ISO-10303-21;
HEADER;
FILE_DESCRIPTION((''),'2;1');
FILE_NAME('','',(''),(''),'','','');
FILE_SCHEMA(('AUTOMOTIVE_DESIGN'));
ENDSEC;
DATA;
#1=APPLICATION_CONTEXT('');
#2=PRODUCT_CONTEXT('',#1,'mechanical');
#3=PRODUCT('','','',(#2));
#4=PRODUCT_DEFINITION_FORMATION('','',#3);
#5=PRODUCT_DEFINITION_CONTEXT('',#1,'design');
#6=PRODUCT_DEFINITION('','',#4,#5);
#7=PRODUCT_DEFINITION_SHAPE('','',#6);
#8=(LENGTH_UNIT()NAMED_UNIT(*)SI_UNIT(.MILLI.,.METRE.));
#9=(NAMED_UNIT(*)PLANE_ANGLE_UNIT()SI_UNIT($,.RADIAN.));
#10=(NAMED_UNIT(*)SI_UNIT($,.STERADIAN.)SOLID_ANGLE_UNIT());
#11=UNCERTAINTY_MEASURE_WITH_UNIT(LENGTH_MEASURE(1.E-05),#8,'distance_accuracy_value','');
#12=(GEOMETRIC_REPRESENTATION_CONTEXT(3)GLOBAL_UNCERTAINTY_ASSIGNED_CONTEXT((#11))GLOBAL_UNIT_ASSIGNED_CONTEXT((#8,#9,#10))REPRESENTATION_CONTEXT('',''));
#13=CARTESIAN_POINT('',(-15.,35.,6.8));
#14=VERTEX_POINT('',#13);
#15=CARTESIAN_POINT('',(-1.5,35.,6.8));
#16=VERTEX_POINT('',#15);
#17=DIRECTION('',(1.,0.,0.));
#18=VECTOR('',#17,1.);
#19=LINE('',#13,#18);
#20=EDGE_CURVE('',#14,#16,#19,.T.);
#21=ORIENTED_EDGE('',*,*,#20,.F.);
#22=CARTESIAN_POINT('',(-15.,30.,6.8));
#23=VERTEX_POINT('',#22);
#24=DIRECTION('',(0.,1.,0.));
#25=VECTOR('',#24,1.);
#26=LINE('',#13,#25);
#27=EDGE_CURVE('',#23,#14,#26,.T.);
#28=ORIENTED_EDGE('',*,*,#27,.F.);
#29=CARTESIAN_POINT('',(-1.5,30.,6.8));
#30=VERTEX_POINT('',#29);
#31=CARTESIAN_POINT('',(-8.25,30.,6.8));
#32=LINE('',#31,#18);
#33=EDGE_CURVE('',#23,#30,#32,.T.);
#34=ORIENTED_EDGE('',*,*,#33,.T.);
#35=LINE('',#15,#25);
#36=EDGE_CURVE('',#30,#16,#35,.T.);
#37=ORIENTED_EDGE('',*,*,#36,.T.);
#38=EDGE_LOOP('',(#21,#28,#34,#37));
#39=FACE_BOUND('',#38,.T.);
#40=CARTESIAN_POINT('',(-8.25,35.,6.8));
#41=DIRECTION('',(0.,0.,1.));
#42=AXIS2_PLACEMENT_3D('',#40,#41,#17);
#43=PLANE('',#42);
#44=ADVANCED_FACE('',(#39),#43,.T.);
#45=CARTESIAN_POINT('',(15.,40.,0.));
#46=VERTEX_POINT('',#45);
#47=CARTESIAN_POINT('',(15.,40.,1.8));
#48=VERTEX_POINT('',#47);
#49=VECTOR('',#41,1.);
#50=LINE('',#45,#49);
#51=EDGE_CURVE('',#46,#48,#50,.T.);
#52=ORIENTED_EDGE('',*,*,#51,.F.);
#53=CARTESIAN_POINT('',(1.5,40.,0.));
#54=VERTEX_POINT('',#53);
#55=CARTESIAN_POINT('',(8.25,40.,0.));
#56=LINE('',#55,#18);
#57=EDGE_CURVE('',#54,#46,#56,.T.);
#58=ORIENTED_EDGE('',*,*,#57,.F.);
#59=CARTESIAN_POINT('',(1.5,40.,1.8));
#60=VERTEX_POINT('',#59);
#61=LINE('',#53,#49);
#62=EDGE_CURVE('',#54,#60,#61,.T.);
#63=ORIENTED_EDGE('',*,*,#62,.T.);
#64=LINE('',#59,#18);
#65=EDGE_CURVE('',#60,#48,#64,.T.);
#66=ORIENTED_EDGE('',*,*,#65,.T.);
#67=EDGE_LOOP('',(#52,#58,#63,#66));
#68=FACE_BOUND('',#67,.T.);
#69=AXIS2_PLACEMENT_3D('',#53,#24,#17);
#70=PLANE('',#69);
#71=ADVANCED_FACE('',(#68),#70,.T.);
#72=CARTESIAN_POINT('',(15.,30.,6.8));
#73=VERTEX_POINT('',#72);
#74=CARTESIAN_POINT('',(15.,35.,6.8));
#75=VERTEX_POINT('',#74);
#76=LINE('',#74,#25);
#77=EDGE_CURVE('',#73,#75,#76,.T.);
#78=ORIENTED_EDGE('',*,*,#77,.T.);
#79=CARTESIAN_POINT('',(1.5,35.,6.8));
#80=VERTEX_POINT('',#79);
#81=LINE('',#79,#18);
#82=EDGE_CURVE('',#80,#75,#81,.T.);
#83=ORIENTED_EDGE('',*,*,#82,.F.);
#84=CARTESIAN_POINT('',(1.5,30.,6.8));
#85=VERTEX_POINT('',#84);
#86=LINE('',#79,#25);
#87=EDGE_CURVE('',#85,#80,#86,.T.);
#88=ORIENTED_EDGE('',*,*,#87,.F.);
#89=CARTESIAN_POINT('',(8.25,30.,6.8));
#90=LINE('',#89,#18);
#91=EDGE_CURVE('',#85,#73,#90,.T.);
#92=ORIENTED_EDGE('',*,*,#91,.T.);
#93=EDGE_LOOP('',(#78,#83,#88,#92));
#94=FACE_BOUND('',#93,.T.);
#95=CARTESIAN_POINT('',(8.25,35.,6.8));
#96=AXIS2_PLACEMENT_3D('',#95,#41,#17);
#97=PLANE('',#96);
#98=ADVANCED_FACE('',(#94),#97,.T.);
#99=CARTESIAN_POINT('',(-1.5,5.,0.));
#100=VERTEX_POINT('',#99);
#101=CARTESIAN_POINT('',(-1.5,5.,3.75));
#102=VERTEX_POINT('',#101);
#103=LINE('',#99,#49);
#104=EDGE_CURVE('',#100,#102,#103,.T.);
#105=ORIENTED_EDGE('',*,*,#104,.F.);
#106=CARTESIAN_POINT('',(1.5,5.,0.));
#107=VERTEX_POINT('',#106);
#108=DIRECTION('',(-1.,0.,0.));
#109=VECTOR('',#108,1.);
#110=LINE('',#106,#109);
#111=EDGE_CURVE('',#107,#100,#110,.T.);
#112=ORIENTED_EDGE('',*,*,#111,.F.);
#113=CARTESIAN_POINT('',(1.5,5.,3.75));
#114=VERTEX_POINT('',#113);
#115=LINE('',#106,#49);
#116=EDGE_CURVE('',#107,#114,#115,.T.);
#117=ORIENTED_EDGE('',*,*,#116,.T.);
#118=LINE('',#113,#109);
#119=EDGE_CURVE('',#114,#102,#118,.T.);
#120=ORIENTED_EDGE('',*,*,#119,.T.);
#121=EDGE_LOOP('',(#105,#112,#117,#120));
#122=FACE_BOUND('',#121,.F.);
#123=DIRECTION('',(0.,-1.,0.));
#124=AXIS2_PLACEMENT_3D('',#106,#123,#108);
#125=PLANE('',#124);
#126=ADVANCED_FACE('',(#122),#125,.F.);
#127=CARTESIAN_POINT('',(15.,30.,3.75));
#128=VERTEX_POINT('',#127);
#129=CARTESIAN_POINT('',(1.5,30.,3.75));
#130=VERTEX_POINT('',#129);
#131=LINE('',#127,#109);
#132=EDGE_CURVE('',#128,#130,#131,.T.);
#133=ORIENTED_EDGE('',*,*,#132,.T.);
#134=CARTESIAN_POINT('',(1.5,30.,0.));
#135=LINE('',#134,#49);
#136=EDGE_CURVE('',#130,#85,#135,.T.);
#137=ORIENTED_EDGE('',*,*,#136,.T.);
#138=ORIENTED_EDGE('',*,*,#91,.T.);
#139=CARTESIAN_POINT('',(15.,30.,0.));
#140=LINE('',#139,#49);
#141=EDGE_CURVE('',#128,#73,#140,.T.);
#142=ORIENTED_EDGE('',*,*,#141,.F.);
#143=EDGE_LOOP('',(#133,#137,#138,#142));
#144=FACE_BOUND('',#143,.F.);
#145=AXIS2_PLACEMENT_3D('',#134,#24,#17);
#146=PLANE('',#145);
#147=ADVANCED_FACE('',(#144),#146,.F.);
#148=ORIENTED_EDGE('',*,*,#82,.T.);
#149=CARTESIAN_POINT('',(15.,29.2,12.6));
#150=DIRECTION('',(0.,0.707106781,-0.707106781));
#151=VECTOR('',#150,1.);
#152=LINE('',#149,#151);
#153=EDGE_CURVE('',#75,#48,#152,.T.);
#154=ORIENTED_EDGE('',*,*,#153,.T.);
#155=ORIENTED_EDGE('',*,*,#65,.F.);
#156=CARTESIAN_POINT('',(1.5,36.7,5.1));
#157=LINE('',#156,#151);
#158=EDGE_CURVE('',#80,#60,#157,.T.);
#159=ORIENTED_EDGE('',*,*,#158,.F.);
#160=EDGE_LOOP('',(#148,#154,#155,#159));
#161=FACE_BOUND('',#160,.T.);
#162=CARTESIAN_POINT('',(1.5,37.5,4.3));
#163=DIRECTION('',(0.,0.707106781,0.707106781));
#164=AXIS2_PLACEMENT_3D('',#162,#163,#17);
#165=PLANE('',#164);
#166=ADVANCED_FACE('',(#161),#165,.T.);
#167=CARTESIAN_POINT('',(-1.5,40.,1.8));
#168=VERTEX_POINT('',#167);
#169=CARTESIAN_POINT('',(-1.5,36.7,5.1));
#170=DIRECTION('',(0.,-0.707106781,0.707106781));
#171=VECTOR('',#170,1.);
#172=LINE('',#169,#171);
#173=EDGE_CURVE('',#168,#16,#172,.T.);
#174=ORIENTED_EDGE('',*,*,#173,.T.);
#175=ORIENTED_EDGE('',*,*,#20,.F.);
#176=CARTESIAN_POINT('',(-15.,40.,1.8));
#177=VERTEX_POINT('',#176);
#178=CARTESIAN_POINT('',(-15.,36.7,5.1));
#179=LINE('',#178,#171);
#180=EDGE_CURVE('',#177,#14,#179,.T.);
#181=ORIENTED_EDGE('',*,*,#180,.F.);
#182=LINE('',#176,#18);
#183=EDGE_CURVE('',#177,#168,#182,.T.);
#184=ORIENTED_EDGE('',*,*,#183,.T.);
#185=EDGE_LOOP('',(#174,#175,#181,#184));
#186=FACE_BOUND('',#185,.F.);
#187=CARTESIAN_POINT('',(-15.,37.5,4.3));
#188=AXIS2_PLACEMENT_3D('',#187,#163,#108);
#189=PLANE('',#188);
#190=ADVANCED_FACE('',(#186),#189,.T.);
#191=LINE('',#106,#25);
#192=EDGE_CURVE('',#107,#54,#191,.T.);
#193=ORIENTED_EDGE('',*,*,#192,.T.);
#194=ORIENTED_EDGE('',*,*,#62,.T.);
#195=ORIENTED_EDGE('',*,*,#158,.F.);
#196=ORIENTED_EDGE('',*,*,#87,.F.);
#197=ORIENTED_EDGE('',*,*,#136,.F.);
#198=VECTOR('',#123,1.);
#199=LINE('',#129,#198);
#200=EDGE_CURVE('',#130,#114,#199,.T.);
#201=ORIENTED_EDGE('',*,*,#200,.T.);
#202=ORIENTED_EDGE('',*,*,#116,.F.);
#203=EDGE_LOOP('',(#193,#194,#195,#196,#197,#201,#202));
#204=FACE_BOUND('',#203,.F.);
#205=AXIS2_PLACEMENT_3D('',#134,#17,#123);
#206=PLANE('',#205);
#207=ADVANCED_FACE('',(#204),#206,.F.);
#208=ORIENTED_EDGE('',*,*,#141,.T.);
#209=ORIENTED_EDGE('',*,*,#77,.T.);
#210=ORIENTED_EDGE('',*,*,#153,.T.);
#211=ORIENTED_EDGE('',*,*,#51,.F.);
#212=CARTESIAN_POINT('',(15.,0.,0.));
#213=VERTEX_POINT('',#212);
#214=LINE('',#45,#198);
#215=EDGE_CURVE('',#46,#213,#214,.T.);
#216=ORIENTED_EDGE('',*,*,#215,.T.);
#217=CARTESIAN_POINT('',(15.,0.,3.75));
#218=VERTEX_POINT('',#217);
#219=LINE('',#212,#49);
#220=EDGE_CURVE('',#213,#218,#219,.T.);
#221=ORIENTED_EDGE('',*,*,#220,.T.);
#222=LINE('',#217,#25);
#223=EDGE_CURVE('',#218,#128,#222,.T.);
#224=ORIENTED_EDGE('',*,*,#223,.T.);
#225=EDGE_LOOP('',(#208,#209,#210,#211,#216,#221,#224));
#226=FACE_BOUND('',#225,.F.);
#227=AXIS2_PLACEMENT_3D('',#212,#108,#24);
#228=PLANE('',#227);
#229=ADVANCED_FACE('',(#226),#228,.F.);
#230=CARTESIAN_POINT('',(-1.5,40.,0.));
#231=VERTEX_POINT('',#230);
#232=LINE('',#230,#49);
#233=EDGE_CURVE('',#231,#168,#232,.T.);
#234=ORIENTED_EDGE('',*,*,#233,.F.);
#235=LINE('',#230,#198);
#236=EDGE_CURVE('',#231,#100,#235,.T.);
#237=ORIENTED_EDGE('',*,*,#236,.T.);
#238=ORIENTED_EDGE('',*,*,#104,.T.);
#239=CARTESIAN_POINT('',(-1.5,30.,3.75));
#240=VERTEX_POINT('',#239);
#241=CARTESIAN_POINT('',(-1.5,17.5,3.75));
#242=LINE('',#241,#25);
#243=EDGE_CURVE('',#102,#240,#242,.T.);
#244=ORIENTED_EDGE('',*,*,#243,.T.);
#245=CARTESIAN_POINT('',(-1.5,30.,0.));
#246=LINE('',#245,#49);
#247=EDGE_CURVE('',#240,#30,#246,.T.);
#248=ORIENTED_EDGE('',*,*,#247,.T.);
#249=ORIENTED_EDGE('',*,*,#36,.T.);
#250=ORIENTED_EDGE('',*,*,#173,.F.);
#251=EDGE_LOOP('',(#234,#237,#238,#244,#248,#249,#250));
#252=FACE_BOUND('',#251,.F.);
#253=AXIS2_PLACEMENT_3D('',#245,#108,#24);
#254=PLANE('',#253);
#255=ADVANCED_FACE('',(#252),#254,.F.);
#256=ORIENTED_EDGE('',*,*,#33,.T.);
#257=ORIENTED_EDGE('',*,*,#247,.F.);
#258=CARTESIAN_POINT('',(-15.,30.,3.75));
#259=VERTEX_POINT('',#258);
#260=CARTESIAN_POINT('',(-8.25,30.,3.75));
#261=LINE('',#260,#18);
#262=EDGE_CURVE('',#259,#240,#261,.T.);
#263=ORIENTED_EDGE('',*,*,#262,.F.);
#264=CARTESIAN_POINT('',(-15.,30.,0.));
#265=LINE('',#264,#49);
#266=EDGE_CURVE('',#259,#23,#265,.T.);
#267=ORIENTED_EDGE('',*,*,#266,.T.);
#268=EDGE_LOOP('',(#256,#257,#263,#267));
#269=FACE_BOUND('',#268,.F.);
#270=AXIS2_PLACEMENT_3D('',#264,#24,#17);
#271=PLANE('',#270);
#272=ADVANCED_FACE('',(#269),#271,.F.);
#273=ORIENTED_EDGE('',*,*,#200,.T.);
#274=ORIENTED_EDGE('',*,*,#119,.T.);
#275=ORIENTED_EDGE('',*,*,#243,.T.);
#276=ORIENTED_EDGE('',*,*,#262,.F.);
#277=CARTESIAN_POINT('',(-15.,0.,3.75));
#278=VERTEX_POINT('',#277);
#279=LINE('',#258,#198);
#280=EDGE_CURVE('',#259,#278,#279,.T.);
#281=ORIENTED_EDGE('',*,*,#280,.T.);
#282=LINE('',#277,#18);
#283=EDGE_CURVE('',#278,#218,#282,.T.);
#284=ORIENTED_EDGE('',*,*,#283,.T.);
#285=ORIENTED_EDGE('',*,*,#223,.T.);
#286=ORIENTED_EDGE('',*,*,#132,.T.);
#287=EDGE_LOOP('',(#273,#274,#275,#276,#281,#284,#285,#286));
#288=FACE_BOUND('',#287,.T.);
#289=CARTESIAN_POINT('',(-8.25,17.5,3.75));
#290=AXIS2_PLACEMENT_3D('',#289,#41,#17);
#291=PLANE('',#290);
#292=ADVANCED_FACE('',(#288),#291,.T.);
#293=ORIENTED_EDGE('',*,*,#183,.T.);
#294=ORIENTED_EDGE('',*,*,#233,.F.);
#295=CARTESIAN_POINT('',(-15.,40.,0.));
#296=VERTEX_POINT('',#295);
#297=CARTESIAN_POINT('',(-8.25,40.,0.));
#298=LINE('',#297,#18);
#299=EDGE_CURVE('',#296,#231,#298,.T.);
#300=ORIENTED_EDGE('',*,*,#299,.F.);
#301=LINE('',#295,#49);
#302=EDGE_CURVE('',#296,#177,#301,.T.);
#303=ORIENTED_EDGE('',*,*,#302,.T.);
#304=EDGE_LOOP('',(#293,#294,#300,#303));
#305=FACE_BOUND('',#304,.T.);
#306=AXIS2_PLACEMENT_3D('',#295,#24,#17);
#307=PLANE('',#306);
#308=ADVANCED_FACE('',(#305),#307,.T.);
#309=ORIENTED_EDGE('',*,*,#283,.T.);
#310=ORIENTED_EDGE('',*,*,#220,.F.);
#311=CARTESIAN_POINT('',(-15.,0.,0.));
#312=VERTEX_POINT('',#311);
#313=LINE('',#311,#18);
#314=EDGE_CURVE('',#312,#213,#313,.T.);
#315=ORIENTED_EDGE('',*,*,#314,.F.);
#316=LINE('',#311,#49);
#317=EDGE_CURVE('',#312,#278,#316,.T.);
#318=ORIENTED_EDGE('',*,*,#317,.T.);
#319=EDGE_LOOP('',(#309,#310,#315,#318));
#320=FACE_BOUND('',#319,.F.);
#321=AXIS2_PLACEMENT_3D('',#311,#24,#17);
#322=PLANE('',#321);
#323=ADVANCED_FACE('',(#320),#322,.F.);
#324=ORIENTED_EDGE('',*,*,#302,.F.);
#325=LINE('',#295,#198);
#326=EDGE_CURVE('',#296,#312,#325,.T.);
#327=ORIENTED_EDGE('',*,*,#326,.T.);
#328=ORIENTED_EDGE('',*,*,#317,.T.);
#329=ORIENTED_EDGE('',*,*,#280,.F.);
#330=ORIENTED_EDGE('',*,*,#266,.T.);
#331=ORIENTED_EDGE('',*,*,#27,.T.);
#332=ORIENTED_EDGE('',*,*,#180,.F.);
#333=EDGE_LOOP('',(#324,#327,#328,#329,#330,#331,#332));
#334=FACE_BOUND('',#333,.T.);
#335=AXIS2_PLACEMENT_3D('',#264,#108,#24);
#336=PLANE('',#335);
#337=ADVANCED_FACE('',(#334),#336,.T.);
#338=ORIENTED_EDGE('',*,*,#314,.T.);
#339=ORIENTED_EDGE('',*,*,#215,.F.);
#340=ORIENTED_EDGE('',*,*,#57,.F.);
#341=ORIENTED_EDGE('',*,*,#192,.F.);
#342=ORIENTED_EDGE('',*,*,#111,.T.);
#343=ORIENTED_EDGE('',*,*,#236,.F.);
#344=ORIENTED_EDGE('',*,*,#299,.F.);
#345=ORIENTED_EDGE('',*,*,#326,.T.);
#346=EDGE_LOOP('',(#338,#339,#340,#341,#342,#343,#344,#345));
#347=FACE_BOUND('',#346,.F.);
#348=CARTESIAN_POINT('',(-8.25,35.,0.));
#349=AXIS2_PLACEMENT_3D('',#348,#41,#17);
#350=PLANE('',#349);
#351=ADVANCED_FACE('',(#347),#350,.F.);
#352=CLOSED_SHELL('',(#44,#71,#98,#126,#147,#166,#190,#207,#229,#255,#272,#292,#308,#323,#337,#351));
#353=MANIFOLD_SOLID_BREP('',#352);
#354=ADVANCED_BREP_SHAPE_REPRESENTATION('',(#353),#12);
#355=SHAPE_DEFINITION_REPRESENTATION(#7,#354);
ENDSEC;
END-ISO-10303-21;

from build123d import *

# Parameters (mm, degrees)
F0_W     = 13.5
F0_H     = 25
F0_W_2   = 1.5
F0_H_2   = 5
F1_DEPTH = 3.75
F0_H_3   = 10
F2_DEPTH = 6.8
F3_SIZE  = 5


with BuildPart() as f1:
    # F0 (on Top) → F1 (new body)
    with BuildSketch(Plane.XY):
        with Locations((-8.25, 17.5)):
            Rectangle(F0_W, F0_H)
        Polygon((1.5, 30), (1.5, 5), (15, 4.9196085972), (15, 30), align=None)
        Polygon((1.5, 5), (1.5, 0), (15, 0), (15, 4.9196085972), align=None)
        with Locations((0.75, 2.5)):
            Rectangle(F0_W_2, F0_H_2)
        with Locations((-0.75, 2.5)):
            Rectangle(F0_W_2, F0_H_2)
        with Locations((-8.25, 2.5)):
            Rectangle(F0_W, F0_H_2)
    extrude(amount=F1_DEPTH)

    # F0 (on Top) → F2 (join)
    with BuildSketch(Plane.XY):
        with Locations((-8.25, 35)):
            Rectangle(F0_W, F0_H_3)
        with Locations((8.25, 35)):
            Rectangle(F0_W, F0_H_3)
    extrude(amount=F2_DEPTH)

    # F3
    f3_edges = [f1.edges().sort_by_distance(p)[0] for p in [
        (-8.25, 40, 6.8),
        (8.25, 40, 6.8),
    ]]
    chamfer(f3_edges, length=F3_SIZE)


solid = f1.part
